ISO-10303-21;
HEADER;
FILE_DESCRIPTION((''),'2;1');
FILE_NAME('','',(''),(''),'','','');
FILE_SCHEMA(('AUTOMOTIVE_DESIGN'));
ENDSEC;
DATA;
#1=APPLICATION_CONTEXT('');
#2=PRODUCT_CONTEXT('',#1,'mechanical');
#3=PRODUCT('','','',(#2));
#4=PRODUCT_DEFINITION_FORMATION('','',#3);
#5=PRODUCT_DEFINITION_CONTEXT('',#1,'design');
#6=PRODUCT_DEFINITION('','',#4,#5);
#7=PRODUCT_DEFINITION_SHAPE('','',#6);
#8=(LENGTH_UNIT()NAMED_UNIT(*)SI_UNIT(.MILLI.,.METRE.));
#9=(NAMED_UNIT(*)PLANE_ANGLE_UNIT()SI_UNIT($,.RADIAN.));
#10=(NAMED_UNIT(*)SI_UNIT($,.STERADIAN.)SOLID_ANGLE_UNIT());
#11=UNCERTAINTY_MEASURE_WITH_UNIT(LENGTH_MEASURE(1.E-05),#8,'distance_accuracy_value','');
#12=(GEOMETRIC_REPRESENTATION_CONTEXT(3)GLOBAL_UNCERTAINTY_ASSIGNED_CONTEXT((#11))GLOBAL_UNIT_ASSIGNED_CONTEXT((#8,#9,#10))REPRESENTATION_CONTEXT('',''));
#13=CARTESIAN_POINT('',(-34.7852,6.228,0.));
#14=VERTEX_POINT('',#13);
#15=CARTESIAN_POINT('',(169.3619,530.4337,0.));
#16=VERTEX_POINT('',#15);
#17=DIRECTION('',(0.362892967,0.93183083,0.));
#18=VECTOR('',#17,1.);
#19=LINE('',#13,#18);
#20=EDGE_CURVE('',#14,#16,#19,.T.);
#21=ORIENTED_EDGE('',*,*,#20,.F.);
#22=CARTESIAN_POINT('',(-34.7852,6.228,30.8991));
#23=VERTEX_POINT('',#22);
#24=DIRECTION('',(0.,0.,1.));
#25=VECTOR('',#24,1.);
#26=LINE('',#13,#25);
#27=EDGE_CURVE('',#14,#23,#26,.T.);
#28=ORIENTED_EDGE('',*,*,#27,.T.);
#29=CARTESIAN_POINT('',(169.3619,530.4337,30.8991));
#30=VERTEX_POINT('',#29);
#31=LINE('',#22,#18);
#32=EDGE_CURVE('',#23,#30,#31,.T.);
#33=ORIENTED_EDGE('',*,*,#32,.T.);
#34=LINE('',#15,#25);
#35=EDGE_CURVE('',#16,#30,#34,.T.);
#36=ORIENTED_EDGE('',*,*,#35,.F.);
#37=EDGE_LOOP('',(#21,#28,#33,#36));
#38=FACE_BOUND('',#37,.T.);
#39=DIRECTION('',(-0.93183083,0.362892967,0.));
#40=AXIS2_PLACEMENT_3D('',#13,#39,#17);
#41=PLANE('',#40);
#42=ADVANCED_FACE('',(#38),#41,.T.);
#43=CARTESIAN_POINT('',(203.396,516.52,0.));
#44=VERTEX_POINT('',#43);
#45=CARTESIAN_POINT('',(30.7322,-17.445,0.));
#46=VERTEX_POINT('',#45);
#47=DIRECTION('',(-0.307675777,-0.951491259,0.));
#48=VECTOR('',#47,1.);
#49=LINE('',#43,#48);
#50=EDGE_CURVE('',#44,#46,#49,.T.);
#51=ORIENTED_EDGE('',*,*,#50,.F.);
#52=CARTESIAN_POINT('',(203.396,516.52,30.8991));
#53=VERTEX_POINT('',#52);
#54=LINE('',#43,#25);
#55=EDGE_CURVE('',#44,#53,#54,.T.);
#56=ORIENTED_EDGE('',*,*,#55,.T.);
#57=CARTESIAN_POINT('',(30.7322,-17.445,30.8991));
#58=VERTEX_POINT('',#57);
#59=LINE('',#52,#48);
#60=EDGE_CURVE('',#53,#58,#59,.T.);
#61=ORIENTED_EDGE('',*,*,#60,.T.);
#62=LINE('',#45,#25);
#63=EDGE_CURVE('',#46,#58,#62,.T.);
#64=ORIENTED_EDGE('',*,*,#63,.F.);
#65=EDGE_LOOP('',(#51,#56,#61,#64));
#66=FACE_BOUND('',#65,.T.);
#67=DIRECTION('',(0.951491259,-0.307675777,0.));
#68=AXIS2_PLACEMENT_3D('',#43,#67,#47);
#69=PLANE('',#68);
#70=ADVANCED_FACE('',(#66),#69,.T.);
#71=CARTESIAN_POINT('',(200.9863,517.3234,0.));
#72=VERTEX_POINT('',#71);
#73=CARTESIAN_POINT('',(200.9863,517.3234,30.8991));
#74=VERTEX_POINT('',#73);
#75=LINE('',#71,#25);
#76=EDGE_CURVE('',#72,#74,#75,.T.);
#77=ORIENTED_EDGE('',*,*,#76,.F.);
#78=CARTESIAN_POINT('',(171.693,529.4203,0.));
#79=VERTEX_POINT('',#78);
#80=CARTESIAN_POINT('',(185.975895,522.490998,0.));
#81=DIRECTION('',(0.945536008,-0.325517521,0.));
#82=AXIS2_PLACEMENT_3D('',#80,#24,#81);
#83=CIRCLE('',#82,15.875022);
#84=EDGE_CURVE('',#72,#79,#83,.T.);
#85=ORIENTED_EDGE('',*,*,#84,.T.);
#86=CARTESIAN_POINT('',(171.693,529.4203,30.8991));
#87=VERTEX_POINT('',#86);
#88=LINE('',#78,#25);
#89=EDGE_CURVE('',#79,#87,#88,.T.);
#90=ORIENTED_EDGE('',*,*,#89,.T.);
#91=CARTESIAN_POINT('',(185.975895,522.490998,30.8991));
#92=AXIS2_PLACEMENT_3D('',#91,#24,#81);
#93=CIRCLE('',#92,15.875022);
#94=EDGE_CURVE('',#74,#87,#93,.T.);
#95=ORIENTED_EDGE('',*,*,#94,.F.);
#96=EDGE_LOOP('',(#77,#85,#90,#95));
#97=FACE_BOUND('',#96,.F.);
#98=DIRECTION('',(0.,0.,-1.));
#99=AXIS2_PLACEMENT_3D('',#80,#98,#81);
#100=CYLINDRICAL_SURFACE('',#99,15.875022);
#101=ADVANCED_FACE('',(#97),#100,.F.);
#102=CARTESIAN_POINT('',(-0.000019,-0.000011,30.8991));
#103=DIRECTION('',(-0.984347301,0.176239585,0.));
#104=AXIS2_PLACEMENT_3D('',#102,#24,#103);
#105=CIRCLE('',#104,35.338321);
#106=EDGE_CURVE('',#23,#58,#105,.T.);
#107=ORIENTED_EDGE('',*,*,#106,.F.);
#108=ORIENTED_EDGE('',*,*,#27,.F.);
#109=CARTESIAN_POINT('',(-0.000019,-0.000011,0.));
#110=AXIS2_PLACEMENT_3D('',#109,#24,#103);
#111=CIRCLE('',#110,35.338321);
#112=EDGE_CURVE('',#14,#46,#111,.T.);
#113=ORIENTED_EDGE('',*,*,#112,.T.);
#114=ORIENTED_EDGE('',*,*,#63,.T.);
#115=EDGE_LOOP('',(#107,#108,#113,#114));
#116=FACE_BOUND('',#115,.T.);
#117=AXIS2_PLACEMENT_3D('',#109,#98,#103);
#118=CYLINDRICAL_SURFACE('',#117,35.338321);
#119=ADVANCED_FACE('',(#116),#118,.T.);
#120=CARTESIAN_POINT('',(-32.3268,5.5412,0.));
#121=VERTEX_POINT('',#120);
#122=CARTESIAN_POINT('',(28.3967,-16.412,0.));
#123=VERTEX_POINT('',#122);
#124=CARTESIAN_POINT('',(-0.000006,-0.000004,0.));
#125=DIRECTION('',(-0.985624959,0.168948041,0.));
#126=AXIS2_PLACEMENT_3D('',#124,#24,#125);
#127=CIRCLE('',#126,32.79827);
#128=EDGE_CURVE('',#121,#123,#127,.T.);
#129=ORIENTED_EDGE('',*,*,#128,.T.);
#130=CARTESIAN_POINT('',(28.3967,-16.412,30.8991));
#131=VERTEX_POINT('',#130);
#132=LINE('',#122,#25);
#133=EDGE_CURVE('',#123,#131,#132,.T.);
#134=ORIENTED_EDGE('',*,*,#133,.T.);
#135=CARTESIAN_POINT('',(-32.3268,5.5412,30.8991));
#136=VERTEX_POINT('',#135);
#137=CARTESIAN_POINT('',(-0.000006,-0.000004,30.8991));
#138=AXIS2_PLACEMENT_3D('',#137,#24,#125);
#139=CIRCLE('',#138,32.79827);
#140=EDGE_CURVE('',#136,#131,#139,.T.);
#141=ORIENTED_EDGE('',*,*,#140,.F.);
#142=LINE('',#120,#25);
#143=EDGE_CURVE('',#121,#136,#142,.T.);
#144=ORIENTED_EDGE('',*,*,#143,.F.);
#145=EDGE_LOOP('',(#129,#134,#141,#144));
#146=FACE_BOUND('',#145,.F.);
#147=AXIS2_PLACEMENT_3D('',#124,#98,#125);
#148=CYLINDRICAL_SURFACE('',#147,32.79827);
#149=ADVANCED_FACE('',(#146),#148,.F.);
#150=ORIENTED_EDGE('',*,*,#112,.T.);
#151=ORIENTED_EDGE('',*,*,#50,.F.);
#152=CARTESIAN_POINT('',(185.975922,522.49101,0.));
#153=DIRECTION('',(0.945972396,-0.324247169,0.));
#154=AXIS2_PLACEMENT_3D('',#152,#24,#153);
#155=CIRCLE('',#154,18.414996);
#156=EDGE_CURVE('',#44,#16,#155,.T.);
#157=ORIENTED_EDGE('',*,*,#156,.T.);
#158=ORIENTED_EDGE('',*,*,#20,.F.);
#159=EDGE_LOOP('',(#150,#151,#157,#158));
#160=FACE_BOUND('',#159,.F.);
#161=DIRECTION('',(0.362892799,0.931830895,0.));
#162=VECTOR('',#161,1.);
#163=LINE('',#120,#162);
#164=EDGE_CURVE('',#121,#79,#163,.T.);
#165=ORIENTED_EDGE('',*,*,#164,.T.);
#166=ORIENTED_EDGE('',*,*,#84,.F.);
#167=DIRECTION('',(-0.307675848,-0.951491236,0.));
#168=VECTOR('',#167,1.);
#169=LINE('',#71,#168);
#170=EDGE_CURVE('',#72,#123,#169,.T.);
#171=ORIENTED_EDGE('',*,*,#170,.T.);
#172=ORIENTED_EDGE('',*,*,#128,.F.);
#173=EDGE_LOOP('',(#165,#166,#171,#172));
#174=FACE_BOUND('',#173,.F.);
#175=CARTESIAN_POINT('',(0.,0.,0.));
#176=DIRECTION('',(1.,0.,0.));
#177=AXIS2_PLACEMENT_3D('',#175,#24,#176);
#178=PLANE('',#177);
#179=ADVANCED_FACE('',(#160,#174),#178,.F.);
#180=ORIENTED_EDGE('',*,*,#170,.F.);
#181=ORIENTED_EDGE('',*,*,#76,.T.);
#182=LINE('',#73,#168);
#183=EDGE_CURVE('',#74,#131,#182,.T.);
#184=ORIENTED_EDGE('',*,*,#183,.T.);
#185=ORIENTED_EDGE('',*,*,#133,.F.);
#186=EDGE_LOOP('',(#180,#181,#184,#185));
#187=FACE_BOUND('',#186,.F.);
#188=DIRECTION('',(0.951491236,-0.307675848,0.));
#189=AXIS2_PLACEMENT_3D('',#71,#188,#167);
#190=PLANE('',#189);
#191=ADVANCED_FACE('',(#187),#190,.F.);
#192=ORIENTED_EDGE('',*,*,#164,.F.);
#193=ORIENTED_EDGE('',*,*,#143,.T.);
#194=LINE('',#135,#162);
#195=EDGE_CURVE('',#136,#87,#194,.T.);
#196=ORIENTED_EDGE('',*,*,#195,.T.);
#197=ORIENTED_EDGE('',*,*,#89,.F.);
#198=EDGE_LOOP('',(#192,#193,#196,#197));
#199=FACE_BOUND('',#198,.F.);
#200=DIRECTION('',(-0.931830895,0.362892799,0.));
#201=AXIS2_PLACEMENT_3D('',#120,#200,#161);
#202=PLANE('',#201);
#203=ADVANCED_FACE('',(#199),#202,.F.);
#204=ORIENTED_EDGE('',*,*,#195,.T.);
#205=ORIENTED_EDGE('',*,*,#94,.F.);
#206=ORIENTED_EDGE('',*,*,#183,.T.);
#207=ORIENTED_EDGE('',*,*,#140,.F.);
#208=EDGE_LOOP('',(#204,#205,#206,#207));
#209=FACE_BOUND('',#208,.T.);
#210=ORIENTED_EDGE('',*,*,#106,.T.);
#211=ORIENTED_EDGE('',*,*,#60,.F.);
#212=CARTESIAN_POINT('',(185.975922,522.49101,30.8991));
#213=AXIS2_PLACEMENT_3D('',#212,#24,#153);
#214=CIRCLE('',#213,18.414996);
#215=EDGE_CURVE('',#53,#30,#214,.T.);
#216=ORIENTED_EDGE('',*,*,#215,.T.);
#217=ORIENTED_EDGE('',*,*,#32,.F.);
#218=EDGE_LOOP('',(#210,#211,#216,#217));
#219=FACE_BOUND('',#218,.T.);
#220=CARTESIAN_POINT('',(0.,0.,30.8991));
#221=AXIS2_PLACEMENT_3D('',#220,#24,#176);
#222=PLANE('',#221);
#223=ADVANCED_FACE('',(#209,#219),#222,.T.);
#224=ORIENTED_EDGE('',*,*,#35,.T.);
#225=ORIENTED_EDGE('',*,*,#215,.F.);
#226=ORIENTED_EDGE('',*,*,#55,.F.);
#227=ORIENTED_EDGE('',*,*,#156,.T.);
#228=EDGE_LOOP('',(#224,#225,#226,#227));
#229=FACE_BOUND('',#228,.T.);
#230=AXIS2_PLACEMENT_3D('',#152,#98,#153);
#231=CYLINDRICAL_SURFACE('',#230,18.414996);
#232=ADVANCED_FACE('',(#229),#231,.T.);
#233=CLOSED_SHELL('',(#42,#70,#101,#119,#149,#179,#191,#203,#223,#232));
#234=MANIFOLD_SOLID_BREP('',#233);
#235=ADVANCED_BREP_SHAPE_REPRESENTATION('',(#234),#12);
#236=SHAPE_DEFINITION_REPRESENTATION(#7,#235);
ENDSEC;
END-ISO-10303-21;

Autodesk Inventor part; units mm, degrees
ref_plane "YZ Plane" through (0, 0, 0) normal (1, 0, 0) x (0, 1, 0)
ref_plane "XZ Plane" through (0, 0, 0) normal (0, 1, 0) x (-1, 0, 0)
ref_plane "XY Plane" through (0, 0, 0) normal (0, 0, 1) x (1, 0, 0)
ref_plane "Work Plane1" through (0, 0, 0) normal (0, 0, 1) x (1, 0, 0)
sketch "Sketch1" plane through (0, 0, 0) normal (0, 0, 1) x (1, 0, 0)
  arc A0 (7.5768, -31.9111) -> (11.0096, -30.8953) centre (0, 0) ccw construction
  arc A1 (2.7361, -32.684) -> (6.282, -32.1911) centre (0, 0) ccw construction
  arc A2 (-2.1658, -32.7267) -> (1.414, -32.7678) centre (0, 0) ccw construction
  arc A3 (12.2483, -30.4254) -> (15.4914, -28.9093) centre (0, 0) ccw construction
  arc A4 (16.6462, -28.2601) -> (19.627, -26.2775) centre (0, 0) ccw construction
  circle A5 centre (0, 0) radius 37.1131 construction
  circle A6 centre (0, 0) radius 32.4639 construction
  arc A7 (-32.3268, 5.5412) -> (28.3967, -16.412) centre (0, 0) ccw
  circle A8 centre (185.9759, 522.491) radius 15.875 construction
  circle A9 centre (185.9759, 522.491) radius 6.35 construction
  arc A10 (198.6184, 512.8898) -> (171.693, 529.4203) centre (185.9759, 522.491) ccw construction
  arc A11 (200.9863, 517.3234) -> (171.693, 529.4203) centre (185.9759, 522.491) ccw
  line L0 (200.9863, 517.3234) -> (28.3967, -16.412)
  line L1 (-32.3268, 5.5412) -> (171.693, 529.4203)
  arc A12 (203.396, 516.52) -> (169.3619, 530.4337) centre (185.9759, 522.491) ccw
  line L2 (203.396, 516.52) -> (30.7322, -17.445)
  arc A13 (-34.7852, 6.228) -> (30.7322, -17.445) centre (0, 0) ccw
  line L3 (-34.7852, 6.228) -> (169.3619, 530.4337)
  dimension "d0" = 2.54
extrude "Extrusion1" add sketch "Sketch1" along normal up to surface (30.8991 mm away)
properties part number "Belt" material "Acetal Resin, Black"
